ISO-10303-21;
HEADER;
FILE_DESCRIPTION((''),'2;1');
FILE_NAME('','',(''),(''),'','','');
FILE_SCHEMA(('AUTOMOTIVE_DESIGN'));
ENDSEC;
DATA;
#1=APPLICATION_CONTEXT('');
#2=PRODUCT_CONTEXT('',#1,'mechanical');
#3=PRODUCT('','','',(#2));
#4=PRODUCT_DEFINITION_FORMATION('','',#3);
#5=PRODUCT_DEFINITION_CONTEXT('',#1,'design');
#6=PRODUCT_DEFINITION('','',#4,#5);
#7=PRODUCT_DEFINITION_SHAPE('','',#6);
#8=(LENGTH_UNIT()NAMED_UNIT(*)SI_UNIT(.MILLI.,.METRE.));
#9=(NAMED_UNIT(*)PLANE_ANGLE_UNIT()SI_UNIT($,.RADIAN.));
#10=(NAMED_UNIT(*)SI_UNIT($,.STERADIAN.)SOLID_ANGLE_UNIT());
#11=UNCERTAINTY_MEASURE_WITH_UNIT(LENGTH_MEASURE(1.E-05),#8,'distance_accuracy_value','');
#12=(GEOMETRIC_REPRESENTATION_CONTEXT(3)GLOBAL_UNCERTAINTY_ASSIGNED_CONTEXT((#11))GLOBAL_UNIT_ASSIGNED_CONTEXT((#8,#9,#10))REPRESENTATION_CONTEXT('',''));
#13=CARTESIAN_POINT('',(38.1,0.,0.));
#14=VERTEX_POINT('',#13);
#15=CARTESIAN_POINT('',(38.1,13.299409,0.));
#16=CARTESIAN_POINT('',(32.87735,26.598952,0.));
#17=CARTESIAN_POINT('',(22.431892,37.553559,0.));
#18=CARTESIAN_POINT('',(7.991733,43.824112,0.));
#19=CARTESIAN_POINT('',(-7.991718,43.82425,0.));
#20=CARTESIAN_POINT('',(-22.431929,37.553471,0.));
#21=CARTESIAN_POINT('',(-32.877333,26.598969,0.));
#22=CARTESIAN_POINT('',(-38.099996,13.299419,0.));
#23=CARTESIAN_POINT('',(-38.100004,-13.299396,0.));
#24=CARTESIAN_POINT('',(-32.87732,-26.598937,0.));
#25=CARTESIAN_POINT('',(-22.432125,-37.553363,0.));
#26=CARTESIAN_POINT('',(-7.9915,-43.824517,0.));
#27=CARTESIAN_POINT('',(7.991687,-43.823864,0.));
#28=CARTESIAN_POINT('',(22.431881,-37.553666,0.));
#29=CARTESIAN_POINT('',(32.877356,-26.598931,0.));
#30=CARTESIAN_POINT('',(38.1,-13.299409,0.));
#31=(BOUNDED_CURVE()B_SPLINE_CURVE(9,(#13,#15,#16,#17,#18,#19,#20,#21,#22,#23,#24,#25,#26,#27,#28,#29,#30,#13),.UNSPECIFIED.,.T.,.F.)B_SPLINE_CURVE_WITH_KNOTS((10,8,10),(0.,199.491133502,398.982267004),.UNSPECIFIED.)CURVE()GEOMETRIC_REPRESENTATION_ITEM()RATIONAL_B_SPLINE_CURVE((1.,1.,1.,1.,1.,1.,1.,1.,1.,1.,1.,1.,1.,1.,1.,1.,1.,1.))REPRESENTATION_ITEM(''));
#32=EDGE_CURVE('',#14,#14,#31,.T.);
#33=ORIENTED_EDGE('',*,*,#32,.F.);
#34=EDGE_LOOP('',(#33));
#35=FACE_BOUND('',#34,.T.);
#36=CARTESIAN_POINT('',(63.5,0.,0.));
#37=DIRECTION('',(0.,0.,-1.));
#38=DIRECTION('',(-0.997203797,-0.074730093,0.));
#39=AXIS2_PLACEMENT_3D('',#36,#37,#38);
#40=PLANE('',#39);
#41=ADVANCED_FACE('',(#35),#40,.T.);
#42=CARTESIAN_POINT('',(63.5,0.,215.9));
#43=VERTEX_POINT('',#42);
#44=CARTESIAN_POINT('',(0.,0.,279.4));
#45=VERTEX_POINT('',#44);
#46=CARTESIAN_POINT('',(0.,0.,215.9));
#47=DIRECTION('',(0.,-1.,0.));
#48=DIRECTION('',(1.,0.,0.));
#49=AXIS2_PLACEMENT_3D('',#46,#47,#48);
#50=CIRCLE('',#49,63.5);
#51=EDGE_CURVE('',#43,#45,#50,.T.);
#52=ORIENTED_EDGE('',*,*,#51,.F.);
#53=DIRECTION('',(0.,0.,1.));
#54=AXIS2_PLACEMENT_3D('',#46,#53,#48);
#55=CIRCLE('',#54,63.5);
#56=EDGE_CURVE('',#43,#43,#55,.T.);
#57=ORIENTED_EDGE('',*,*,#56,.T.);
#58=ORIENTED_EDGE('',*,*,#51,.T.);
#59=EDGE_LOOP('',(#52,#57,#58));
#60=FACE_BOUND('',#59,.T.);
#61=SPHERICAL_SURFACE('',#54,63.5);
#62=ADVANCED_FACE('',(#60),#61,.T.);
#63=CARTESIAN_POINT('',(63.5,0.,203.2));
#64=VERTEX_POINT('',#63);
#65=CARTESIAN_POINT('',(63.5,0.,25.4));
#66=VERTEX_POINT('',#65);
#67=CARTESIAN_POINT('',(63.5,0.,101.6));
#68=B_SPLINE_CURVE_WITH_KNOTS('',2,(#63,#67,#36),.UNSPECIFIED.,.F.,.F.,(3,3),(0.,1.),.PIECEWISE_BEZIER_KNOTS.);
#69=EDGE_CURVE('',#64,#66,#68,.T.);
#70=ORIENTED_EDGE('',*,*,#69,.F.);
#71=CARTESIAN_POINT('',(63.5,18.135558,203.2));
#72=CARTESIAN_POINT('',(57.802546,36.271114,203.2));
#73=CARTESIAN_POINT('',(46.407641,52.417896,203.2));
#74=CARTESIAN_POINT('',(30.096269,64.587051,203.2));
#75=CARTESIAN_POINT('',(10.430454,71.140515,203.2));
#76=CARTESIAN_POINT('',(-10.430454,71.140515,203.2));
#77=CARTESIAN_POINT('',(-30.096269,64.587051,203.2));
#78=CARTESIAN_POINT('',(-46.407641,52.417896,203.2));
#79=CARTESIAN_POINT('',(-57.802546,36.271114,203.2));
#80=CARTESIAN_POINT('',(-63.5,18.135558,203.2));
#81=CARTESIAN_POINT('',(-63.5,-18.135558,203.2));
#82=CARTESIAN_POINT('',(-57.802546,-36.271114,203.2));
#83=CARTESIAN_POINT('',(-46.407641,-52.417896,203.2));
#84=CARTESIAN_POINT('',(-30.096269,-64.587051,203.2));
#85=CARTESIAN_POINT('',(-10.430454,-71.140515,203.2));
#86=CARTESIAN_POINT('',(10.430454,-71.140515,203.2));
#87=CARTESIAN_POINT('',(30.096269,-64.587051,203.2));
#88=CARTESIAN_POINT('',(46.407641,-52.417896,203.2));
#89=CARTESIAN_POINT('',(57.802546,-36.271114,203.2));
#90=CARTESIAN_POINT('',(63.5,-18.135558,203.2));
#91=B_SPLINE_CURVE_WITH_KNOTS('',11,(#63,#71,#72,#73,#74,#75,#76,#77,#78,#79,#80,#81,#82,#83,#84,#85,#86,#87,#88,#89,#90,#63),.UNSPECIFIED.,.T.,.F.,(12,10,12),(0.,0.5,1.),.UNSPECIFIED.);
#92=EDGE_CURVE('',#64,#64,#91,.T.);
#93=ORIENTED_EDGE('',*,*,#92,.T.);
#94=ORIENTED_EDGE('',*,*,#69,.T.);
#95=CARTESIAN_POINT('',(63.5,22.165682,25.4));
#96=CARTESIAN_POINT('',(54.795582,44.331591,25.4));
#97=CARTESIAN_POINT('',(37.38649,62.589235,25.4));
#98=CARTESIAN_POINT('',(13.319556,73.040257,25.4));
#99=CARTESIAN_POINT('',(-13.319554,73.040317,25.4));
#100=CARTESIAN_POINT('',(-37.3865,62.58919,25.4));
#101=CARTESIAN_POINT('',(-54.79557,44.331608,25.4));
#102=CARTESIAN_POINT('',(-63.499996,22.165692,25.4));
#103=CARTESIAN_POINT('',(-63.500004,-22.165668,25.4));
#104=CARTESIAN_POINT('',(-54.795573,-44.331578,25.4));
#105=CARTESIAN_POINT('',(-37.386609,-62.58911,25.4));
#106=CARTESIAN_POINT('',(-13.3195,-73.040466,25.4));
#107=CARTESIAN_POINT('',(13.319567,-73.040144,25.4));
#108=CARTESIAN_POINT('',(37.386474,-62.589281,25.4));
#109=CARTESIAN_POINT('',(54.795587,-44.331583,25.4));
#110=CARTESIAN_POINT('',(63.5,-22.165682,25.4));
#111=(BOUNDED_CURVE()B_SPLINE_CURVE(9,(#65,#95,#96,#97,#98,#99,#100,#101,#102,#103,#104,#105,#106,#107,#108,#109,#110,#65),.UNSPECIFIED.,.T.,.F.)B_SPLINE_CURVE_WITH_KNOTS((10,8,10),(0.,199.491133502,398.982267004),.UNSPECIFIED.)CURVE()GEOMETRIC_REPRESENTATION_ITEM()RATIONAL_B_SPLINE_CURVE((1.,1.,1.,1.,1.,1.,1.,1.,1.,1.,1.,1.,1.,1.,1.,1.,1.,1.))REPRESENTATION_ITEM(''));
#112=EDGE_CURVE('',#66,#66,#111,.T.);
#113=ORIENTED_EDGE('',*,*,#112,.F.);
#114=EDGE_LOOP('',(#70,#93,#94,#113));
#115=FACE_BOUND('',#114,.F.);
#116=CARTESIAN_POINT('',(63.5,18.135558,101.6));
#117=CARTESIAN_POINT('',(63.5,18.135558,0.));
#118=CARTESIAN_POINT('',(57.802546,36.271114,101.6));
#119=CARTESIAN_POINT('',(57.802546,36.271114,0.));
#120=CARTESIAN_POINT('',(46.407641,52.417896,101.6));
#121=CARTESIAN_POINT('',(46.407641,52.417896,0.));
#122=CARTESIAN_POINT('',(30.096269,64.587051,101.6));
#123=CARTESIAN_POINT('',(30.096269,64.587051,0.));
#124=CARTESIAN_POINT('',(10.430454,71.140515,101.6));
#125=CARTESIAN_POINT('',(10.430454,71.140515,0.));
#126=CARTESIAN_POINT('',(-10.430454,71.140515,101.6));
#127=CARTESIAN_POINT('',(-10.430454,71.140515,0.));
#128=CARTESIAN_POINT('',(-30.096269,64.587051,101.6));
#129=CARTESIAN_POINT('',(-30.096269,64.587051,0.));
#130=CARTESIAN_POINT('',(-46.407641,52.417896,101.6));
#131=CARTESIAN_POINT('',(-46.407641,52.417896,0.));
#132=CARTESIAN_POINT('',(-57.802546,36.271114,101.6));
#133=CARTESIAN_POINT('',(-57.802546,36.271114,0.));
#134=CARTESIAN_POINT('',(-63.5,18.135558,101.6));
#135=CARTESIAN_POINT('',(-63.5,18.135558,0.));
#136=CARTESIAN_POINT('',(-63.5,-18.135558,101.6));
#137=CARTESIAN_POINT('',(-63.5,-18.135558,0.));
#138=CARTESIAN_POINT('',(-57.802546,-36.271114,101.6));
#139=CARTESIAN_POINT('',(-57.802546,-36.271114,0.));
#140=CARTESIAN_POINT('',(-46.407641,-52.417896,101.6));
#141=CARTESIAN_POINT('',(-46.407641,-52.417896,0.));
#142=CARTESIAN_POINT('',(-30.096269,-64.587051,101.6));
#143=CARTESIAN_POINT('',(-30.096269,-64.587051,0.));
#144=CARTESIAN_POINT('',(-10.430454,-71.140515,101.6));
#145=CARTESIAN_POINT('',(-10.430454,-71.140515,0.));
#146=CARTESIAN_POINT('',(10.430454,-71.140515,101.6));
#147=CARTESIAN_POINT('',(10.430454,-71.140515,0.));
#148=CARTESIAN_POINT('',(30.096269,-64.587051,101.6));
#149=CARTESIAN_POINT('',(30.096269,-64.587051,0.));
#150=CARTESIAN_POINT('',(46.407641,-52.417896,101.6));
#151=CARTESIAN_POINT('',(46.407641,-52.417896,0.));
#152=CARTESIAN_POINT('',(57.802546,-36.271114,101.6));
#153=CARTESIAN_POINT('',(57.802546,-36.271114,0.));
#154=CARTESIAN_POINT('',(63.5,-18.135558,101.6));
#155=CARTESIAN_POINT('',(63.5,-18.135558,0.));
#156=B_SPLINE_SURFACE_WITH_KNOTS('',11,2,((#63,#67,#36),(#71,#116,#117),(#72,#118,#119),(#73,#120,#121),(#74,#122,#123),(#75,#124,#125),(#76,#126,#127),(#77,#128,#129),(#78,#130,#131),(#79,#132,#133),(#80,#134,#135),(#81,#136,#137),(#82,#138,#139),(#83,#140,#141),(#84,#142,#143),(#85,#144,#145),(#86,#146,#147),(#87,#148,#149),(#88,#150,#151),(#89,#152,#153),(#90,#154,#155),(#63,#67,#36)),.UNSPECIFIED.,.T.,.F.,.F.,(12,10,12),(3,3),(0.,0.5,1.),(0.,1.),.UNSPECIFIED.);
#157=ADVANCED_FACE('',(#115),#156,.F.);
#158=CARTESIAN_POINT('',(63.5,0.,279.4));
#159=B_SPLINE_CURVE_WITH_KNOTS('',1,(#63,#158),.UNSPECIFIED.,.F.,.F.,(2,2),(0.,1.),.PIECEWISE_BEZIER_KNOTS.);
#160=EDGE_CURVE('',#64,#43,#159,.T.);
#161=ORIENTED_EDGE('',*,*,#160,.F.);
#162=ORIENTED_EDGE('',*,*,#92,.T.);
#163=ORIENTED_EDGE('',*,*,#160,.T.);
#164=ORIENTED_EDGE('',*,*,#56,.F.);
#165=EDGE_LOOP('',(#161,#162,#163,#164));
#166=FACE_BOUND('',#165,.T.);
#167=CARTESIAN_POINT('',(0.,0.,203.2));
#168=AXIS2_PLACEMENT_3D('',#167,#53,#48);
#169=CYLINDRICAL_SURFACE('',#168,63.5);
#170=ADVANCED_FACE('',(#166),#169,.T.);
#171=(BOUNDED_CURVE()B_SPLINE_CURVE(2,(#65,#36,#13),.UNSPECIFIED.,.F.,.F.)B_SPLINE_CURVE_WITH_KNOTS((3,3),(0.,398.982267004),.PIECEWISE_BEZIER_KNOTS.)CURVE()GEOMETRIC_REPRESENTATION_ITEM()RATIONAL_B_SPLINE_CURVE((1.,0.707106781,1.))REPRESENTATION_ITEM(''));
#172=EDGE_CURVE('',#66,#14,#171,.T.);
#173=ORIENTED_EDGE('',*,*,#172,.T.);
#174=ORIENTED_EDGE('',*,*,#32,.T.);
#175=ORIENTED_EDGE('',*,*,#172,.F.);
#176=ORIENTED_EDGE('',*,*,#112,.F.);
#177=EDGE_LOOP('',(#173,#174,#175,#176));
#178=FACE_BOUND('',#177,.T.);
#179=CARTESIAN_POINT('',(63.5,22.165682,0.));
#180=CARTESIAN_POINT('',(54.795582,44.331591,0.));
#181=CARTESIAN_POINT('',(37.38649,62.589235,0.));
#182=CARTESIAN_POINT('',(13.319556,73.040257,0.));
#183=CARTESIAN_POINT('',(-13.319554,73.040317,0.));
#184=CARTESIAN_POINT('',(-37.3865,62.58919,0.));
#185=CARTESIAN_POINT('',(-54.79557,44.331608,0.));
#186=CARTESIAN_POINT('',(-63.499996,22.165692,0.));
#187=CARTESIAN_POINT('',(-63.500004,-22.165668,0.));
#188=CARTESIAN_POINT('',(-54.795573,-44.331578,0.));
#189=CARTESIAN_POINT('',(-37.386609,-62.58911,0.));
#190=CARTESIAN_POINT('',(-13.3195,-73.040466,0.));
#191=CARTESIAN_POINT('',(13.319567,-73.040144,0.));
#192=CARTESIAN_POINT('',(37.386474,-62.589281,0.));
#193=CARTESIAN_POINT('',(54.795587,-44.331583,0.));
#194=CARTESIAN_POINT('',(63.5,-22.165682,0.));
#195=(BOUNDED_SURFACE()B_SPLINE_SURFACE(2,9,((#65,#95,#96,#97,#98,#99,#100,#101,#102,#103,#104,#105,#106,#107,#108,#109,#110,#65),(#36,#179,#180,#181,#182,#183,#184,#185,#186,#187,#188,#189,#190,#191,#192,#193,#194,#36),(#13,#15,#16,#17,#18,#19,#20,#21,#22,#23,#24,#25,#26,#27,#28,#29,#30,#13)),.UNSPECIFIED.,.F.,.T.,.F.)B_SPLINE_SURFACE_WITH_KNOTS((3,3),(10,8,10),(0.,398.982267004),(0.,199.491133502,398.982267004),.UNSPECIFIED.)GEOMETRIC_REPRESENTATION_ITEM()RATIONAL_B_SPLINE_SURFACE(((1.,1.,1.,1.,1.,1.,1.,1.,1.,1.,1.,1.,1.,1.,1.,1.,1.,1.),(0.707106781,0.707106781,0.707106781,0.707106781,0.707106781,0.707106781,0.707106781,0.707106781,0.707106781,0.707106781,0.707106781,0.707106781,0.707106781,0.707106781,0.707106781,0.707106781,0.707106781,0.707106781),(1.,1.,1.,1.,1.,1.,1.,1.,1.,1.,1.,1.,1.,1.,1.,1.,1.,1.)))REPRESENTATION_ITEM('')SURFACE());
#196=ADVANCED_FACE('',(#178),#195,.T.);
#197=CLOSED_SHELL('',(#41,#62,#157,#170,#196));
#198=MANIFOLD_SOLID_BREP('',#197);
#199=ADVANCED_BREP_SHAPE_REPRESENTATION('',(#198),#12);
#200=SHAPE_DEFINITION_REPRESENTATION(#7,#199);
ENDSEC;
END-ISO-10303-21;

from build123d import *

# Parameters (mm, degrees)
F4_R  = 63.5
F2_R  = 63.5
F0_R  = 63.5
F6_R  = 25.4
F8_R  = 63.5
F10_R = 63.5


with BuildPart() as f5:
    # F4 (on offset) → F5 section 0
    with BuildSketch(Plane.XY.offset(203.2)):
        Circle(F4_R)
    # F2 (on offset) → F5 section 1
    with BuildSketch(Plane.XY.offset(101.6)):
        Circle(F2_R)
    # F0 (on Top) → F5 section 2
    with BuildSketch(Plane.XY):
        Circle(F0_R)
    loft()

    # F6
    f6_edges = [f5.edges().sort_by_distance(p)[0] for p in [
        (-63.5, 0, 0),
    ]]
    fillet(f6_edges, radius=F6_R)

    # F4 (on offset) → F9 section 0
    with BuildSketch(Plane.XY.offset(203.2)):
        Circle(F4_R)
    # F8 (on offset) → F9 section 1
    with BuildSketch(Plane.XY.offset(279.4)):
        Circle(F8_R)
    loft()

    # F10
    f10_edges = [f5.edges().sort_by_distance(p)[0] for p in [
        (-63.5, 0, 279.4),
    ]]
    fillet(f10_edges, radius=F10_R)


solid = f5.part
